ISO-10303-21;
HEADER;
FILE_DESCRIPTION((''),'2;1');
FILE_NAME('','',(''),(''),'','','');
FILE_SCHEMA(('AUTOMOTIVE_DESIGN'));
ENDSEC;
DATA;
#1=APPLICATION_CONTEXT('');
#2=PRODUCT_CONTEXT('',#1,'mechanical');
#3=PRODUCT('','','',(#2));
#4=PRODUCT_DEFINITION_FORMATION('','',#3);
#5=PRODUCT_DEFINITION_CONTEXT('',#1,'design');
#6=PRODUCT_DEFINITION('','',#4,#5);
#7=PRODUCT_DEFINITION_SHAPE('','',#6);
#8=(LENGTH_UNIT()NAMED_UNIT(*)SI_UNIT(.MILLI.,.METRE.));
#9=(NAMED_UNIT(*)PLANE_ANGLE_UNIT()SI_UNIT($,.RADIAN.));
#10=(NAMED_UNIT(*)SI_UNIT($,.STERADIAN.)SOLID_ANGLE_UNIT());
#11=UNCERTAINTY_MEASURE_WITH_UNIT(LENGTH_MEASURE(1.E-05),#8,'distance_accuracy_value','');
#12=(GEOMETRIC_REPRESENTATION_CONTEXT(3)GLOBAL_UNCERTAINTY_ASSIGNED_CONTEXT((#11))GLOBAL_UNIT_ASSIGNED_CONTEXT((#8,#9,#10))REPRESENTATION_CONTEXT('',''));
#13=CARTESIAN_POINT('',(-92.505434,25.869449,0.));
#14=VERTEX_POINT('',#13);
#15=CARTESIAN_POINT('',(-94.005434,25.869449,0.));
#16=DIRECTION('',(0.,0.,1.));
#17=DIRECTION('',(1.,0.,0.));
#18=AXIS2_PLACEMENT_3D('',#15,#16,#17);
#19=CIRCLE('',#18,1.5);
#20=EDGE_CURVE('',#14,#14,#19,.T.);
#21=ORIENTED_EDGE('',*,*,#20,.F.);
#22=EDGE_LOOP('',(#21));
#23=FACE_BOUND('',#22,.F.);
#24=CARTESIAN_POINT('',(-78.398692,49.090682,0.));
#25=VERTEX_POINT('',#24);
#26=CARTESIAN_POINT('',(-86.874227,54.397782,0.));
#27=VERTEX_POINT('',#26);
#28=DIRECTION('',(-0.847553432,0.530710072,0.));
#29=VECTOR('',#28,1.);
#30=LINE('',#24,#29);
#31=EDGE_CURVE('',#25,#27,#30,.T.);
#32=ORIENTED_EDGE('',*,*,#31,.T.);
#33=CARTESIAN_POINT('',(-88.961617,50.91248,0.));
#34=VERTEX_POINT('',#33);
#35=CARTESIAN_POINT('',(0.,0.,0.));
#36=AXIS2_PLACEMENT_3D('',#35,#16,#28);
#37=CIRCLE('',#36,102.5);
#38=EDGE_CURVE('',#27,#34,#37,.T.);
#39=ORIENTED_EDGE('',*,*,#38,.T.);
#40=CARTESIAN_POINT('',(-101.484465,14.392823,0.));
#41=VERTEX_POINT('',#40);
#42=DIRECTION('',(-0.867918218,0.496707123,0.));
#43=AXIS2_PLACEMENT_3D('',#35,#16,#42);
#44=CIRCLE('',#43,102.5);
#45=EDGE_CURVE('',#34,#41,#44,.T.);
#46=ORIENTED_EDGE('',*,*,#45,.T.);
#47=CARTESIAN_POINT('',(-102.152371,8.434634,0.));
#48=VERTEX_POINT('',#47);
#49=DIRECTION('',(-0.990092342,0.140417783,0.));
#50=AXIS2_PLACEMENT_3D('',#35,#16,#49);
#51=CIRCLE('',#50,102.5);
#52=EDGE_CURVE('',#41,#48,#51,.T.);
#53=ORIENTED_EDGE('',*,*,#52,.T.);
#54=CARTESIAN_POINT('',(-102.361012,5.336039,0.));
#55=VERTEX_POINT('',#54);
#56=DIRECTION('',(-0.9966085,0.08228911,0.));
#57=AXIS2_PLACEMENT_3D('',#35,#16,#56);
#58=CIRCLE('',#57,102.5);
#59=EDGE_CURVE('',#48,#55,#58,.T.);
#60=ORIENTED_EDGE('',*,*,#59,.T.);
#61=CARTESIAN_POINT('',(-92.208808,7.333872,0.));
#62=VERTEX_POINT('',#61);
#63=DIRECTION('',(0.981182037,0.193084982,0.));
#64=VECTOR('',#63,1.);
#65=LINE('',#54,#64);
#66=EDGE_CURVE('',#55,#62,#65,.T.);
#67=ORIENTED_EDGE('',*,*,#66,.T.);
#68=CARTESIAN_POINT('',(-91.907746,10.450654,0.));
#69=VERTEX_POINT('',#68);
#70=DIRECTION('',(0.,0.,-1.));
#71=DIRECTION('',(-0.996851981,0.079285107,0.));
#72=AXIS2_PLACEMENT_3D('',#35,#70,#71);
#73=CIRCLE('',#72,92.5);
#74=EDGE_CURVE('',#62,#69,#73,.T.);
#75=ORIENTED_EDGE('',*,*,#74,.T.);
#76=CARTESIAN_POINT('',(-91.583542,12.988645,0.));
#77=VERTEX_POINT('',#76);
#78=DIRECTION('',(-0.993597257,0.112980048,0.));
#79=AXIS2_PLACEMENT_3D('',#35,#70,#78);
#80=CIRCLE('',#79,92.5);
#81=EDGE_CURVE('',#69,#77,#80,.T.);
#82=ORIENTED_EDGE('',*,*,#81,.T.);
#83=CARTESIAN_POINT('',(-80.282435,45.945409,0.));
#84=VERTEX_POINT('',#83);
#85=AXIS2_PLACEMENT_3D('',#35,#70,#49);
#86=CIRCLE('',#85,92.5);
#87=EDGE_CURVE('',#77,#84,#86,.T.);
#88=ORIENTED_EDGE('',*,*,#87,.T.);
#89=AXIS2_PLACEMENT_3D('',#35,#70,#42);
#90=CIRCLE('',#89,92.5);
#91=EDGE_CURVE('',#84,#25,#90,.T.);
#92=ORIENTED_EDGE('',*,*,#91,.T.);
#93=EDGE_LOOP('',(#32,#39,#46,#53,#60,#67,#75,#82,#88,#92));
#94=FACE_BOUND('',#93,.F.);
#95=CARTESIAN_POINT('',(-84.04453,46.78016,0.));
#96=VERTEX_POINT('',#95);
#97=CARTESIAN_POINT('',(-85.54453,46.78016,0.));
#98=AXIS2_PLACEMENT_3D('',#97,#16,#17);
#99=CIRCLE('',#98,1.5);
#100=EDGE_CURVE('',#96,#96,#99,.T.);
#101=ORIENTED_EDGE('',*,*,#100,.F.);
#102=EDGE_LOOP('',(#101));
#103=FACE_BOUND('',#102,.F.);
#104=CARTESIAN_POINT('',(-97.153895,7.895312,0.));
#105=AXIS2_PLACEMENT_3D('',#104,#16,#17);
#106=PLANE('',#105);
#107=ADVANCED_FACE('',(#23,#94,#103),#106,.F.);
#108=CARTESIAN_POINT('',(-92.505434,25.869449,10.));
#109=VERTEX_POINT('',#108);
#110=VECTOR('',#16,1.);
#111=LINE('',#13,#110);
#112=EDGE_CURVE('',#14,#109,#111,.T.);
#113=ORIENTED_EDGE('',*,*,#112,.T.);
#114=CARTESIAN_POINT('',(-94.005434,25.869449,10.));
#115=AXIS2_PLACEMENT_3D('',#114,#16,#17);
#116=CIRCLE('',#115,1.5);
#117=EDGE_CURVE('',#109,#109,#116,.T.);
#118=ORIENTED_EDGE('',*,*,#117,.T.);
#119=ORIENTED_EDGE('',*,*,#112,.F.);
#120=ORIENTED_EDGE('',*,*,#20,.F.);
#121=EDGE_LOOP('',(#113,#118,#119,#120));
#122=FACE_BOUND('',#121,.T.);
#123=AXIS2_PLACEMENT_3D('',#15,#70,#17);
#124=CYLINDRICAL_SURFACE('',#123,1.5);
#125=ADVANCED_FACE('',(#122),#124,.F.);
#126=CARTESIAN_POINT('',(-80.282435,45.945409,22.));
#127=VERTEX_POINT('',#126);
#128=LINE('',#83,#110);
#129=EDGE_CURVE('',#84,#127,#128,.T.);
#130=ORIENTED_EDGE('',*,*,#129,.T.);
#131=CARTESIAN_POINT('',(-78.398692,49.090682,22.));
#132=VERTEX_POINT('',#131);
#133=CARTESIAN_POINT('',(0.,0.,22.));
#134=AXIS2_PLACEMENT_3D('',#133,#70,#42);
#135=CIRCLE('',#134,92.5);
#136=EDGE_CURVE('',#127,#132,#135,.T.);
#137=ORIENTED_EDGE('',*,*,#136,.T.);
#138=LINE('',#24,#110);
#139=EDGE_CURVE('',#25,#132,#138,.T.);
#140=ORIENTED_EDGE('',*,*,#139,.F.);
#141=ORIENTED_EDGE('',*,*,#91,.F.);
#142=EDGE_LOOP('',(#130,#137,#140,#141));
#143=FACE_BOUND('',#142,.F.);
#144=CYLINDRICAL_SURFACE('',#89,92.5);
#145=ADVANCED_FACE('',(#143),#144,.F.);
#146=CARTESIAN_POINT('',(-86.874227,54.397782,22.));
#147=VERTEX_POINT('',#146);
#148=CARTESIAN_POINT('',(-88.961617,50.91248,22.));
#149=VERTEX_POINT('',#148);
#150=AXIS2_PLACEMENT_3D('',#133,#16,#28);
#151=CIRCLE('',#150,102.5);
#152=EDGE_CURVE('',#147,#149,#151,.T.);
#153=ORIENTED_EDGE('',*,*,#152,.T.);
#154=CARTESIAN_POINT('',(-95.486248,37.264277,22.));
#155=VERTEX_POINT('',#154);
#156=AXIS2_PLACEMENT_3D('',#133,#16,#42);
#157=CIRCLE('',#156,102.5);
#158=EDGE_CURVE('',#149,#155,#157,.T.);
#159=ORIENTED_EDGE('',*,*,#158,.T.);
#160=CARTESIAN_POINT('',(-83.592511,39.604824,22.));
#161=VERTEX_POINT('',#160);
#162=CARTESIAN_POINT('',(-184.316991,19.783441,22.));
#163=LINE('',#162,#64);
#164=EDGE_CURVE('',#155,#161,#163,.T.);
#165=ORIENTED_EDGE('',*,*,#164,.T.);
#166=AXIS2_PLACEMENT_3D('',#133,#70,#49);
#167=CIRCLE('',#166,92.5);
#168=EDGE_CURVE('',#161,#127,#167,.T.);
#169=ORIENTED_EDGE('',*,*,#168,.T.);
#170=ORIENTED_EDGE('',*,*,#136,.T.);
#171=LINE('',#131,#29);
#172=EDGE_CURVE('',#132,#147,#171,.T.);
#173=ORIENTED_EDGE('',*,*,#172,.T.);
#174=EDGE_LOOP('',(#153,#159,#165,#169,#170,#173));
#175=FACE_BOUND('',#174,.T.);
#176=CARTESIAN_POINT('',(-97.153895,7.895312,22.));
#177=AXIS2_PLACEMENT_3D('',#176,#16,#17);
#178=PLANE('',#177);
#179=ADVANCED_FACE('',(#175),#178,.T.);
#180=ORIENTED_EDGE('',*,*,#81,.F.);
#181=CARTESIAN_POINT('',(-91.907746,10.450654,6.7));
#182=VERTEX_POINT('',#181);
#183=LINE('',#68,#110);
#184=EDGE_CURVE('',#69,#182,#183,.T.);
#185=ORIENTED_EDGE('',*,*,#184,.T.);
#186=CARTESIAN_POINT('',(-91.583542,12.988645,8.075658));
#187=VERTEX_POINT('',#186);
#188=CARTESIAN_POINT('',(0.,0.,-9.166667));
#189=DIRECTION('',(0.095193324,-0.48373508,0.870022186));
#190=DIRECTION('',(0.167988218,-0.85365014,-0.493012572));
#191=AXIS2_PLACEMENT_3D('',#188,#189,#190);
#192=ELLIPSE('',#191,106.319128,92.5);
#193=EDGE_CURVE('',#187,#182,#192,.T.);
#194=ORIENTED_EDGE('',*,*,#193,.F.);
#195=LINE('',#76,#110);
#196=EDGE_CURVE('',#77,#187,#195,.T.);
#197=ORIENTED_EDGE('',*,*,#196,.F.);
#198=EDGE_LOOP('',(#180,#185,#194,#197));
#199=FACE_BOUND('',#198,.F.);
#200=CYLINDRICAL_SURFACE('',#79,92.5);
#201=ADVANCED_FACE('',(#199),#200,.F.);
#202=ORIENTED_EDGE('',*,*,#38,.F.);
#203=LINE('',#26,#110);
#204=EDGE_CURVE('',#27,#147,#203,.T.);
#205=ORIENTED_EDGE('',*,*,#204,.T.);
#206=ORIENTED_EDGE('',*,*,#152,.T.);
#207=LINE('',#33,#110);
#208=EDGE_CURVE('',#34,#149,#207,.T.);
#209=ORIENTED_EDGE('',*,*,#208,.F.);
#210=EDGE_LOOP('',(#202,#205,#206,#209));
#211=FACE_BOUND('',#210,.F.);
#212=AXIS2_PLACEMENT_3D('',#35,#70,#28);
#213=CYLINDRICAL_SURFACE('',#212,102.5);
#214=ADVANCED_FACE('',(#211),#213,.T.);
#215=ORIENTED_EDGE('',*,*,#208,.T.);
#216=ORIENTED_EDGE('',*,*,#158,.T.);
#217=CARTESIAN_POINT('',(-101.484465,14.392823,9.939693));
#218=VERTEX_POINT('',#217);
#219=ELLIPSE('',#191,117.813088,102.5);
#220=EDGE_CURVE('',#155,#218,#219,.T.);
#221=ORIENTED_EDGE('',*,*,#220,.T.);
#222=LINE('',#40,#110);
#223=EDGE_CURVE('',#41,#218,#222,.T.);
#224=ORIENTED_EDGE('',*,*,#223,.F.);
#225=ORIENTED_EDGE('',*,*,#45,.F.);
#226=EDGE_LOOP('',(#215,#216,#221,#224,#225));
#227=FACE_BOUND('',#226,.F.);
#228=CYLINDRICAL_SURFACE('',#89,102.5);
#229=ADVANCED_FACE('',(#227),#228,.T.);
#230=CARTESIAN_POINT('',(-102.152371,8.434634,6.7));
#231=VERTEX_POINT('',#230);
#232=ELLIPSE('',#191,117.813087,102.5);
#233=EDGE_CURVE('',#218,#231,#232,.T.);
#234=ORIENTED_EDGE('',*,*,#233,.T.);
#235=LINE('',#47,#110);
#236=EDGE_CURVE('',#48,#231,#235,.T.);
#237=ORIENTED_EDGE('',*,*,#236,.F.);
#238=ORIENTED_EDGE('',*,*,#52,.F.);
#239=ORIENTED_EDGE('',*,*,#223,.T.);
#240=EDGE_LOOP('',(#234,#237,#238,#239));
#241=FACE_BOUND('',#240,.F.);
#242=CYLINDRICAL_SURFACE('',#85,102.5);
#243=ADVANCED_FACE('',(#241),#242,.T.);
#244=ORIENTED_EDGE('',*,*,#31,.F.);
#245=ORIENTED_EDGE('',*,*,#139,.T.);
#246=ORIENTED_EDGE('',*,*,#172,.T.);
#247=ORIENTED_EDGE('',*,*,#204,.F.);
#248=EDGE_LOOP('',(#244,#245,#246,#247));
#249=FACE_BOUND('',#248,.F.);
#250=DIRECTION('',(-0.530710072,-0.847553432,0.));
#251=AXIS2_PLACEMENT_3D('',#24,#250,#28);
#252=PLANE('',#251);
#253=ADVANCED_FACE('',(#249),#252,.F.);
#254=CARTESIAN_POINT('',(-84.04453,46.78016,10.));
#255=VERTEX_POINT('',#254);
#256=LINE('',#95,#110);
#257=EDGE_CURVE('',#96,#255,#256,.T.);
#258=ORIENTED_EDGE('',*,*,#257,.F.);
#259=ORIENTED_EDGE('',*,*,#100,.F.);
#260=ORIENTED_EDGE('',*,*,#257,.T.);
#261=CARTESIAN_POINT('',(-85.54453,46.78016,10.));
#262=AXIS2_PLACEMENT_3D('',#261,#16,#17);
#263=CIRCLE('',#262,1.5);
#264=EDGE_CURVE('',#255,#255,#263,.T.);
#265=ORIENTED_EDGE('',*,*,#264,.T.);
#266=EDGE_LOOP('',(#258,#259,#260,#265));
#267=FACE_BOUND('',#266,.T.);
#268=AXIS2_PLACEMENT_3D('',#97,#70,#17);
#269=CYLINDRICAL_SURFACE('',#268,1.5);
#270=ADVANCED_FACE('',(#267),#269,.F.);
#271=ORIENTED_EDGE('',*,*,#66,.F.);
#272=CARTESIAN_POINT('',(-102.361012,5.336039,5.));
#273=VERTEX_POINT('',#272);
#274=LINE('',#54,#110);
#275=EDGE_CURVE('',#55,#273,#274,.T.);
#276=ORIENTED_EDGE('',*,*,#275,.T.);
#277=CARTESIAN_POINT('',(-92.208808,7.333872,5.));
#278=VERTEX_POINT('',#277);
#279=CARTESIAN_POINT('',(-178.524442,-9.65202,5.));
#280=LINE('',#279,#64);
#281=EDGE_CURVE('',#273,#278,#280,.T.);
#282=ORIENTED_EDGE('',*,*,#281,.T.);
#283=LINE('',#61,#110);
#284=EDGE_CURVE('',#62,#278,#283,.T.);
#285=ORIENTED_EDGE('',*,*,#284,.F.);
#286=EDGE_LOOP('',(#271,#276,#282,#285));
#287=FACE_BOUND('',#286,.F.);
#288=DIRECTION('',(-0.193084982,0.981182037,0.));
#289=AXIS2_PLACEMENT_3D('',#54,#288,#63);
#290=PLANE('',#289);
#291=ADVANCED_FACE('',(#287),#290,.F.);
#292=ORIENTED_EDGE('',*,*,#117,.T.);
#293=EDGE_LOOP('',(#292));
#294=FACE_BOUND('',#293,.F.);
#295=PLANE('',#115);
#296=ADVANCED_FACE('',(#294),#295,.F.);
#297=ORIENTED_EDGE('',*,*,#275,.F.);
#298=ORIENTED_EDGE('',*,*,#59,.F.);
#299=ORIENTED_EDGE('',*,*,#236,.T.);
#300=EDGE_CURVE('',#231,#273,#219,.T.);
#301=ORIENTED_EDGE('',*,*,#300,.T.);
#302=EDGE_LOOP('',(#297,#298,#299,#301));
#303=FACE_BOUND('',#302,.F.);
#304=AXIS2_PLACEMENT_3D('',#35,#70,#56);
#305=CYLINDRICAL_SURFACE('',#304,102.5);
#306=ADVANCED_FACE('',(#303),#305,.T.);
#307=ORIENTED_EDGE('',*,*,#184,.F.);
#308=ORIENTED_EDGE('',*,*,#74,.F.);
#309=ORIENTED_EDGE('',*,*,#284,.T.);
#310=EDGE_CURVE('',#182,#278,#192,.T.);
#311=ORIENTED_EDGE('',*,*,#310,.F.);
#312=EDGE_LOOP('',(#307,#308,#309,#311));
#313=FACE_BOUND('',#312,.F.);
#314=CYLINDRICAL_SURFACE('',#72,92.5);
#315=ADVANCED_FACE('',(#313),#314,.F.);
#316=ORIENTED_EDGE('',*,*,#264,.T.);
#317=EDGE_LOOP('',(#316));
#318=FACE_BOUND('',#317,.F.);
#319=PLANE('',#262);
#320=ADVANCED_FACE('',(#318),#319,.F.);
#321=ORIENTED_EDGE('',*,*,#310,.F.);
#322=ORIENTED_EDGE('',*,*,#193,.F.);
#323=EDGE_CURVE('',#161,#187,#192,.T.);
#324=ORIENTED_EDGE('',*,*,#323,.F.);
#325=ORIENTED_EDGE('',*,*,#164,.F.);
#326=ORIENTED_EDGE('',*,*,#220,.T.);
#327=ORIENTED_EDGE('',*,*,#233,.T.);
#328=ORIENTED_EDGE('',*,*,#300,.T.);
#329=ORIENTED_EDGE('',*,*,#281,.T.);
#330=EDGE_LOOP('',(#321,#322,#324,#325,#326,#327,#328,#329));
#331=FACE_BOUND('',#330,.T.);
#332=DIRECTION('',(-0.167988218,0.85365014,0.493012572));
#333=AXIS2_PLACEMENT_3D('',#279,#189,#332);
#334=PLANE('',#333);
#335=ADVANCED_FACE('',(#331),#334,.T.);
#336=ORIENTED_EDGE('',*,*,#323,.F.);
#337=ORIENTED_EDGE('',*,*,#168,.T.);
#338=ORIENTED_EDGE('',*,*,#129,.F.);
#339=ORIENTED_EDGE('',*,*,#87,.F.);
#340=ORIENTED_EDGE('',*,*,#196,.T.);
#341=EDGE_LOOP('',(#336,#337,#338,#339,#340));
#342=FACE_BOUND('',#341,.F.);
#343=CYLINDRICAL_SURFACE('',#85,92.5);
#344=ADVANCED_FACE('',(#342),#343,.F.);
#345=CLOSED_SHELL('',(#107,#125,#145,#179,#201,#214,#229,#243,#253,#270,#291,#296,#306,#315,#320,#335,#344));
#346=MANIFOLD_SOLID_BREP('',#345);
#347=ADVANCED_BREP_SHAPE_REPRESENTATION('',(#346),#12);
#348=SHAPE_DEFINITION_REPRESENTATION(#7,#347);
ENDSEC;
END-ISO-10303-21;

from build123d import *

# Parameters (mm, degrees)
F0_R        = 1.5
F1_DEPTH    = 22
F2_T1_DEPTH = 165.5952281179
F3_DEPTH    = 10


# Not quite as in the source:
# - a fillet or chamfer that OpenCascade refuses, or shapes differently, is made with other operations: its cross-section is extruded or revolved along the edge and cut away or added


with BuildPart() as f1:
    # F0 (on Top) → F1 (new body)
    with BuildSketch(Plane.XY):
        with BuildLine():
            ThreePointArc((-92.2088082298, 7.3338724312), (-92.0714667591, 8.8935374755), (-91.9077462525, 10.4506544671))
            Line((-91.9077462525, 10.4506544671), (-102.1523712509, 8.4346338282))
            ThreePointArc((-102.1523712509, 8.4346338282), (-102.2684274731, 6.8861267905), (-102.3610115463, 5.3360392827))
            Line((-102.3610115463, 5.3360392827), (-92.2088082298, 7.3338724312))
        make_face()
        with BuildLine():
            ThreePointArc((-91.5835416646, 12.9886448933), (-87.4986604127, 30.0039068455), (-80.2824351959, 45.9454089003))
            Line((-80.2824351959, 45.9454089003), (-88.9616173792, 50.9124801328))
            ThreePointArc((-88.9616173792, 50.9124801328), (-96.9579750519, 33.2475724504), (-101.4844650878, 14.3928227196))
            Line((-101.4844650878, 14.3928227196), (-91.5835416646, 12.9886448933))
        make_face()
        with Locations((-94.0054339813, 25.8694488148)):
            Circle(F0_R, mode=Mode.SUBTRACT)
        with Locations((-85.5445299814, 46.7801602206)):
            Circle(F0_R, mode=Mode.SUBTRACT)
        with BuildLine():
            ThreePointArc((-80.2824351959, 45.9454089003), (-79.3561481615, 47.5273789407), (-78.3986924261, 49.0906816603))
            Line((-78.3986924261, 49.0906816603), (-86.8742267425, 54.3977823804))
            ThreePointArc((-86.8742267425, 54.3977823804), (-87.935191206, 52.6654739613), (-88.9616173792, 50.9124801328))
            Line((-88.9616173792, 50.9124801328), (-80.2824351959, 45.9454089003))
        make_face()
        with BuildLine():
            ThreePointArc((-91.9077462525, 10.4506544671), (-91.7544196986, 11.720770699), (-91.5835416646, 12.9886448933))
            Line((-91.5835416646, 12.9886448933), (-101.4844650878, 14.3928227196))
            ThreePointArc((-101.4844650878, 14.3928227196), (-101.8619913522, 11.4186127778), (-102.1523712509, 8.4346338282))
            Line((-102.1523712509, 8.4346338282), (-91.9077462525, 10.4506544671))
        make_face()
        with Locations((-85.5445299814, 46.7801602206)):
            Circle(F0_R)
        with Locations((-94.0054339813, 25.8694488148)):
            Circle(F0_R)
    extrude(amount=F1_DEPTH)

    # F2: chamfer of 17 x 30 on 1 edges, made by hand

    # F2_s2 → F2_t1 (cut)
    with BuildSketch(Plane(origin=(-173.6973169445, -34.1815709152, 0), x_dir=(0, 0, 1), z_dir=(0.9811820369, 0.1930849823, 0))):
        Polygon((5, -25), (22, -55), (22, -25), align=None)
    extrude(amount=F2_T1_DEPTH, mode=Mode.SUBTRACT)

    # F0 (on Top) → F3 (cut)
    with BuildSketch(Plane.XY):
        with Locations((-85.5445299814, 46.7801602206)):
            Circle(F0_R)
        with Locations((-94.0054339813, 25.8694488148)):
            Circle(F0_R)
    extrude(amount=F3_DEPTH, mode=Mode.SUBTRACT)


solid = f1.part
